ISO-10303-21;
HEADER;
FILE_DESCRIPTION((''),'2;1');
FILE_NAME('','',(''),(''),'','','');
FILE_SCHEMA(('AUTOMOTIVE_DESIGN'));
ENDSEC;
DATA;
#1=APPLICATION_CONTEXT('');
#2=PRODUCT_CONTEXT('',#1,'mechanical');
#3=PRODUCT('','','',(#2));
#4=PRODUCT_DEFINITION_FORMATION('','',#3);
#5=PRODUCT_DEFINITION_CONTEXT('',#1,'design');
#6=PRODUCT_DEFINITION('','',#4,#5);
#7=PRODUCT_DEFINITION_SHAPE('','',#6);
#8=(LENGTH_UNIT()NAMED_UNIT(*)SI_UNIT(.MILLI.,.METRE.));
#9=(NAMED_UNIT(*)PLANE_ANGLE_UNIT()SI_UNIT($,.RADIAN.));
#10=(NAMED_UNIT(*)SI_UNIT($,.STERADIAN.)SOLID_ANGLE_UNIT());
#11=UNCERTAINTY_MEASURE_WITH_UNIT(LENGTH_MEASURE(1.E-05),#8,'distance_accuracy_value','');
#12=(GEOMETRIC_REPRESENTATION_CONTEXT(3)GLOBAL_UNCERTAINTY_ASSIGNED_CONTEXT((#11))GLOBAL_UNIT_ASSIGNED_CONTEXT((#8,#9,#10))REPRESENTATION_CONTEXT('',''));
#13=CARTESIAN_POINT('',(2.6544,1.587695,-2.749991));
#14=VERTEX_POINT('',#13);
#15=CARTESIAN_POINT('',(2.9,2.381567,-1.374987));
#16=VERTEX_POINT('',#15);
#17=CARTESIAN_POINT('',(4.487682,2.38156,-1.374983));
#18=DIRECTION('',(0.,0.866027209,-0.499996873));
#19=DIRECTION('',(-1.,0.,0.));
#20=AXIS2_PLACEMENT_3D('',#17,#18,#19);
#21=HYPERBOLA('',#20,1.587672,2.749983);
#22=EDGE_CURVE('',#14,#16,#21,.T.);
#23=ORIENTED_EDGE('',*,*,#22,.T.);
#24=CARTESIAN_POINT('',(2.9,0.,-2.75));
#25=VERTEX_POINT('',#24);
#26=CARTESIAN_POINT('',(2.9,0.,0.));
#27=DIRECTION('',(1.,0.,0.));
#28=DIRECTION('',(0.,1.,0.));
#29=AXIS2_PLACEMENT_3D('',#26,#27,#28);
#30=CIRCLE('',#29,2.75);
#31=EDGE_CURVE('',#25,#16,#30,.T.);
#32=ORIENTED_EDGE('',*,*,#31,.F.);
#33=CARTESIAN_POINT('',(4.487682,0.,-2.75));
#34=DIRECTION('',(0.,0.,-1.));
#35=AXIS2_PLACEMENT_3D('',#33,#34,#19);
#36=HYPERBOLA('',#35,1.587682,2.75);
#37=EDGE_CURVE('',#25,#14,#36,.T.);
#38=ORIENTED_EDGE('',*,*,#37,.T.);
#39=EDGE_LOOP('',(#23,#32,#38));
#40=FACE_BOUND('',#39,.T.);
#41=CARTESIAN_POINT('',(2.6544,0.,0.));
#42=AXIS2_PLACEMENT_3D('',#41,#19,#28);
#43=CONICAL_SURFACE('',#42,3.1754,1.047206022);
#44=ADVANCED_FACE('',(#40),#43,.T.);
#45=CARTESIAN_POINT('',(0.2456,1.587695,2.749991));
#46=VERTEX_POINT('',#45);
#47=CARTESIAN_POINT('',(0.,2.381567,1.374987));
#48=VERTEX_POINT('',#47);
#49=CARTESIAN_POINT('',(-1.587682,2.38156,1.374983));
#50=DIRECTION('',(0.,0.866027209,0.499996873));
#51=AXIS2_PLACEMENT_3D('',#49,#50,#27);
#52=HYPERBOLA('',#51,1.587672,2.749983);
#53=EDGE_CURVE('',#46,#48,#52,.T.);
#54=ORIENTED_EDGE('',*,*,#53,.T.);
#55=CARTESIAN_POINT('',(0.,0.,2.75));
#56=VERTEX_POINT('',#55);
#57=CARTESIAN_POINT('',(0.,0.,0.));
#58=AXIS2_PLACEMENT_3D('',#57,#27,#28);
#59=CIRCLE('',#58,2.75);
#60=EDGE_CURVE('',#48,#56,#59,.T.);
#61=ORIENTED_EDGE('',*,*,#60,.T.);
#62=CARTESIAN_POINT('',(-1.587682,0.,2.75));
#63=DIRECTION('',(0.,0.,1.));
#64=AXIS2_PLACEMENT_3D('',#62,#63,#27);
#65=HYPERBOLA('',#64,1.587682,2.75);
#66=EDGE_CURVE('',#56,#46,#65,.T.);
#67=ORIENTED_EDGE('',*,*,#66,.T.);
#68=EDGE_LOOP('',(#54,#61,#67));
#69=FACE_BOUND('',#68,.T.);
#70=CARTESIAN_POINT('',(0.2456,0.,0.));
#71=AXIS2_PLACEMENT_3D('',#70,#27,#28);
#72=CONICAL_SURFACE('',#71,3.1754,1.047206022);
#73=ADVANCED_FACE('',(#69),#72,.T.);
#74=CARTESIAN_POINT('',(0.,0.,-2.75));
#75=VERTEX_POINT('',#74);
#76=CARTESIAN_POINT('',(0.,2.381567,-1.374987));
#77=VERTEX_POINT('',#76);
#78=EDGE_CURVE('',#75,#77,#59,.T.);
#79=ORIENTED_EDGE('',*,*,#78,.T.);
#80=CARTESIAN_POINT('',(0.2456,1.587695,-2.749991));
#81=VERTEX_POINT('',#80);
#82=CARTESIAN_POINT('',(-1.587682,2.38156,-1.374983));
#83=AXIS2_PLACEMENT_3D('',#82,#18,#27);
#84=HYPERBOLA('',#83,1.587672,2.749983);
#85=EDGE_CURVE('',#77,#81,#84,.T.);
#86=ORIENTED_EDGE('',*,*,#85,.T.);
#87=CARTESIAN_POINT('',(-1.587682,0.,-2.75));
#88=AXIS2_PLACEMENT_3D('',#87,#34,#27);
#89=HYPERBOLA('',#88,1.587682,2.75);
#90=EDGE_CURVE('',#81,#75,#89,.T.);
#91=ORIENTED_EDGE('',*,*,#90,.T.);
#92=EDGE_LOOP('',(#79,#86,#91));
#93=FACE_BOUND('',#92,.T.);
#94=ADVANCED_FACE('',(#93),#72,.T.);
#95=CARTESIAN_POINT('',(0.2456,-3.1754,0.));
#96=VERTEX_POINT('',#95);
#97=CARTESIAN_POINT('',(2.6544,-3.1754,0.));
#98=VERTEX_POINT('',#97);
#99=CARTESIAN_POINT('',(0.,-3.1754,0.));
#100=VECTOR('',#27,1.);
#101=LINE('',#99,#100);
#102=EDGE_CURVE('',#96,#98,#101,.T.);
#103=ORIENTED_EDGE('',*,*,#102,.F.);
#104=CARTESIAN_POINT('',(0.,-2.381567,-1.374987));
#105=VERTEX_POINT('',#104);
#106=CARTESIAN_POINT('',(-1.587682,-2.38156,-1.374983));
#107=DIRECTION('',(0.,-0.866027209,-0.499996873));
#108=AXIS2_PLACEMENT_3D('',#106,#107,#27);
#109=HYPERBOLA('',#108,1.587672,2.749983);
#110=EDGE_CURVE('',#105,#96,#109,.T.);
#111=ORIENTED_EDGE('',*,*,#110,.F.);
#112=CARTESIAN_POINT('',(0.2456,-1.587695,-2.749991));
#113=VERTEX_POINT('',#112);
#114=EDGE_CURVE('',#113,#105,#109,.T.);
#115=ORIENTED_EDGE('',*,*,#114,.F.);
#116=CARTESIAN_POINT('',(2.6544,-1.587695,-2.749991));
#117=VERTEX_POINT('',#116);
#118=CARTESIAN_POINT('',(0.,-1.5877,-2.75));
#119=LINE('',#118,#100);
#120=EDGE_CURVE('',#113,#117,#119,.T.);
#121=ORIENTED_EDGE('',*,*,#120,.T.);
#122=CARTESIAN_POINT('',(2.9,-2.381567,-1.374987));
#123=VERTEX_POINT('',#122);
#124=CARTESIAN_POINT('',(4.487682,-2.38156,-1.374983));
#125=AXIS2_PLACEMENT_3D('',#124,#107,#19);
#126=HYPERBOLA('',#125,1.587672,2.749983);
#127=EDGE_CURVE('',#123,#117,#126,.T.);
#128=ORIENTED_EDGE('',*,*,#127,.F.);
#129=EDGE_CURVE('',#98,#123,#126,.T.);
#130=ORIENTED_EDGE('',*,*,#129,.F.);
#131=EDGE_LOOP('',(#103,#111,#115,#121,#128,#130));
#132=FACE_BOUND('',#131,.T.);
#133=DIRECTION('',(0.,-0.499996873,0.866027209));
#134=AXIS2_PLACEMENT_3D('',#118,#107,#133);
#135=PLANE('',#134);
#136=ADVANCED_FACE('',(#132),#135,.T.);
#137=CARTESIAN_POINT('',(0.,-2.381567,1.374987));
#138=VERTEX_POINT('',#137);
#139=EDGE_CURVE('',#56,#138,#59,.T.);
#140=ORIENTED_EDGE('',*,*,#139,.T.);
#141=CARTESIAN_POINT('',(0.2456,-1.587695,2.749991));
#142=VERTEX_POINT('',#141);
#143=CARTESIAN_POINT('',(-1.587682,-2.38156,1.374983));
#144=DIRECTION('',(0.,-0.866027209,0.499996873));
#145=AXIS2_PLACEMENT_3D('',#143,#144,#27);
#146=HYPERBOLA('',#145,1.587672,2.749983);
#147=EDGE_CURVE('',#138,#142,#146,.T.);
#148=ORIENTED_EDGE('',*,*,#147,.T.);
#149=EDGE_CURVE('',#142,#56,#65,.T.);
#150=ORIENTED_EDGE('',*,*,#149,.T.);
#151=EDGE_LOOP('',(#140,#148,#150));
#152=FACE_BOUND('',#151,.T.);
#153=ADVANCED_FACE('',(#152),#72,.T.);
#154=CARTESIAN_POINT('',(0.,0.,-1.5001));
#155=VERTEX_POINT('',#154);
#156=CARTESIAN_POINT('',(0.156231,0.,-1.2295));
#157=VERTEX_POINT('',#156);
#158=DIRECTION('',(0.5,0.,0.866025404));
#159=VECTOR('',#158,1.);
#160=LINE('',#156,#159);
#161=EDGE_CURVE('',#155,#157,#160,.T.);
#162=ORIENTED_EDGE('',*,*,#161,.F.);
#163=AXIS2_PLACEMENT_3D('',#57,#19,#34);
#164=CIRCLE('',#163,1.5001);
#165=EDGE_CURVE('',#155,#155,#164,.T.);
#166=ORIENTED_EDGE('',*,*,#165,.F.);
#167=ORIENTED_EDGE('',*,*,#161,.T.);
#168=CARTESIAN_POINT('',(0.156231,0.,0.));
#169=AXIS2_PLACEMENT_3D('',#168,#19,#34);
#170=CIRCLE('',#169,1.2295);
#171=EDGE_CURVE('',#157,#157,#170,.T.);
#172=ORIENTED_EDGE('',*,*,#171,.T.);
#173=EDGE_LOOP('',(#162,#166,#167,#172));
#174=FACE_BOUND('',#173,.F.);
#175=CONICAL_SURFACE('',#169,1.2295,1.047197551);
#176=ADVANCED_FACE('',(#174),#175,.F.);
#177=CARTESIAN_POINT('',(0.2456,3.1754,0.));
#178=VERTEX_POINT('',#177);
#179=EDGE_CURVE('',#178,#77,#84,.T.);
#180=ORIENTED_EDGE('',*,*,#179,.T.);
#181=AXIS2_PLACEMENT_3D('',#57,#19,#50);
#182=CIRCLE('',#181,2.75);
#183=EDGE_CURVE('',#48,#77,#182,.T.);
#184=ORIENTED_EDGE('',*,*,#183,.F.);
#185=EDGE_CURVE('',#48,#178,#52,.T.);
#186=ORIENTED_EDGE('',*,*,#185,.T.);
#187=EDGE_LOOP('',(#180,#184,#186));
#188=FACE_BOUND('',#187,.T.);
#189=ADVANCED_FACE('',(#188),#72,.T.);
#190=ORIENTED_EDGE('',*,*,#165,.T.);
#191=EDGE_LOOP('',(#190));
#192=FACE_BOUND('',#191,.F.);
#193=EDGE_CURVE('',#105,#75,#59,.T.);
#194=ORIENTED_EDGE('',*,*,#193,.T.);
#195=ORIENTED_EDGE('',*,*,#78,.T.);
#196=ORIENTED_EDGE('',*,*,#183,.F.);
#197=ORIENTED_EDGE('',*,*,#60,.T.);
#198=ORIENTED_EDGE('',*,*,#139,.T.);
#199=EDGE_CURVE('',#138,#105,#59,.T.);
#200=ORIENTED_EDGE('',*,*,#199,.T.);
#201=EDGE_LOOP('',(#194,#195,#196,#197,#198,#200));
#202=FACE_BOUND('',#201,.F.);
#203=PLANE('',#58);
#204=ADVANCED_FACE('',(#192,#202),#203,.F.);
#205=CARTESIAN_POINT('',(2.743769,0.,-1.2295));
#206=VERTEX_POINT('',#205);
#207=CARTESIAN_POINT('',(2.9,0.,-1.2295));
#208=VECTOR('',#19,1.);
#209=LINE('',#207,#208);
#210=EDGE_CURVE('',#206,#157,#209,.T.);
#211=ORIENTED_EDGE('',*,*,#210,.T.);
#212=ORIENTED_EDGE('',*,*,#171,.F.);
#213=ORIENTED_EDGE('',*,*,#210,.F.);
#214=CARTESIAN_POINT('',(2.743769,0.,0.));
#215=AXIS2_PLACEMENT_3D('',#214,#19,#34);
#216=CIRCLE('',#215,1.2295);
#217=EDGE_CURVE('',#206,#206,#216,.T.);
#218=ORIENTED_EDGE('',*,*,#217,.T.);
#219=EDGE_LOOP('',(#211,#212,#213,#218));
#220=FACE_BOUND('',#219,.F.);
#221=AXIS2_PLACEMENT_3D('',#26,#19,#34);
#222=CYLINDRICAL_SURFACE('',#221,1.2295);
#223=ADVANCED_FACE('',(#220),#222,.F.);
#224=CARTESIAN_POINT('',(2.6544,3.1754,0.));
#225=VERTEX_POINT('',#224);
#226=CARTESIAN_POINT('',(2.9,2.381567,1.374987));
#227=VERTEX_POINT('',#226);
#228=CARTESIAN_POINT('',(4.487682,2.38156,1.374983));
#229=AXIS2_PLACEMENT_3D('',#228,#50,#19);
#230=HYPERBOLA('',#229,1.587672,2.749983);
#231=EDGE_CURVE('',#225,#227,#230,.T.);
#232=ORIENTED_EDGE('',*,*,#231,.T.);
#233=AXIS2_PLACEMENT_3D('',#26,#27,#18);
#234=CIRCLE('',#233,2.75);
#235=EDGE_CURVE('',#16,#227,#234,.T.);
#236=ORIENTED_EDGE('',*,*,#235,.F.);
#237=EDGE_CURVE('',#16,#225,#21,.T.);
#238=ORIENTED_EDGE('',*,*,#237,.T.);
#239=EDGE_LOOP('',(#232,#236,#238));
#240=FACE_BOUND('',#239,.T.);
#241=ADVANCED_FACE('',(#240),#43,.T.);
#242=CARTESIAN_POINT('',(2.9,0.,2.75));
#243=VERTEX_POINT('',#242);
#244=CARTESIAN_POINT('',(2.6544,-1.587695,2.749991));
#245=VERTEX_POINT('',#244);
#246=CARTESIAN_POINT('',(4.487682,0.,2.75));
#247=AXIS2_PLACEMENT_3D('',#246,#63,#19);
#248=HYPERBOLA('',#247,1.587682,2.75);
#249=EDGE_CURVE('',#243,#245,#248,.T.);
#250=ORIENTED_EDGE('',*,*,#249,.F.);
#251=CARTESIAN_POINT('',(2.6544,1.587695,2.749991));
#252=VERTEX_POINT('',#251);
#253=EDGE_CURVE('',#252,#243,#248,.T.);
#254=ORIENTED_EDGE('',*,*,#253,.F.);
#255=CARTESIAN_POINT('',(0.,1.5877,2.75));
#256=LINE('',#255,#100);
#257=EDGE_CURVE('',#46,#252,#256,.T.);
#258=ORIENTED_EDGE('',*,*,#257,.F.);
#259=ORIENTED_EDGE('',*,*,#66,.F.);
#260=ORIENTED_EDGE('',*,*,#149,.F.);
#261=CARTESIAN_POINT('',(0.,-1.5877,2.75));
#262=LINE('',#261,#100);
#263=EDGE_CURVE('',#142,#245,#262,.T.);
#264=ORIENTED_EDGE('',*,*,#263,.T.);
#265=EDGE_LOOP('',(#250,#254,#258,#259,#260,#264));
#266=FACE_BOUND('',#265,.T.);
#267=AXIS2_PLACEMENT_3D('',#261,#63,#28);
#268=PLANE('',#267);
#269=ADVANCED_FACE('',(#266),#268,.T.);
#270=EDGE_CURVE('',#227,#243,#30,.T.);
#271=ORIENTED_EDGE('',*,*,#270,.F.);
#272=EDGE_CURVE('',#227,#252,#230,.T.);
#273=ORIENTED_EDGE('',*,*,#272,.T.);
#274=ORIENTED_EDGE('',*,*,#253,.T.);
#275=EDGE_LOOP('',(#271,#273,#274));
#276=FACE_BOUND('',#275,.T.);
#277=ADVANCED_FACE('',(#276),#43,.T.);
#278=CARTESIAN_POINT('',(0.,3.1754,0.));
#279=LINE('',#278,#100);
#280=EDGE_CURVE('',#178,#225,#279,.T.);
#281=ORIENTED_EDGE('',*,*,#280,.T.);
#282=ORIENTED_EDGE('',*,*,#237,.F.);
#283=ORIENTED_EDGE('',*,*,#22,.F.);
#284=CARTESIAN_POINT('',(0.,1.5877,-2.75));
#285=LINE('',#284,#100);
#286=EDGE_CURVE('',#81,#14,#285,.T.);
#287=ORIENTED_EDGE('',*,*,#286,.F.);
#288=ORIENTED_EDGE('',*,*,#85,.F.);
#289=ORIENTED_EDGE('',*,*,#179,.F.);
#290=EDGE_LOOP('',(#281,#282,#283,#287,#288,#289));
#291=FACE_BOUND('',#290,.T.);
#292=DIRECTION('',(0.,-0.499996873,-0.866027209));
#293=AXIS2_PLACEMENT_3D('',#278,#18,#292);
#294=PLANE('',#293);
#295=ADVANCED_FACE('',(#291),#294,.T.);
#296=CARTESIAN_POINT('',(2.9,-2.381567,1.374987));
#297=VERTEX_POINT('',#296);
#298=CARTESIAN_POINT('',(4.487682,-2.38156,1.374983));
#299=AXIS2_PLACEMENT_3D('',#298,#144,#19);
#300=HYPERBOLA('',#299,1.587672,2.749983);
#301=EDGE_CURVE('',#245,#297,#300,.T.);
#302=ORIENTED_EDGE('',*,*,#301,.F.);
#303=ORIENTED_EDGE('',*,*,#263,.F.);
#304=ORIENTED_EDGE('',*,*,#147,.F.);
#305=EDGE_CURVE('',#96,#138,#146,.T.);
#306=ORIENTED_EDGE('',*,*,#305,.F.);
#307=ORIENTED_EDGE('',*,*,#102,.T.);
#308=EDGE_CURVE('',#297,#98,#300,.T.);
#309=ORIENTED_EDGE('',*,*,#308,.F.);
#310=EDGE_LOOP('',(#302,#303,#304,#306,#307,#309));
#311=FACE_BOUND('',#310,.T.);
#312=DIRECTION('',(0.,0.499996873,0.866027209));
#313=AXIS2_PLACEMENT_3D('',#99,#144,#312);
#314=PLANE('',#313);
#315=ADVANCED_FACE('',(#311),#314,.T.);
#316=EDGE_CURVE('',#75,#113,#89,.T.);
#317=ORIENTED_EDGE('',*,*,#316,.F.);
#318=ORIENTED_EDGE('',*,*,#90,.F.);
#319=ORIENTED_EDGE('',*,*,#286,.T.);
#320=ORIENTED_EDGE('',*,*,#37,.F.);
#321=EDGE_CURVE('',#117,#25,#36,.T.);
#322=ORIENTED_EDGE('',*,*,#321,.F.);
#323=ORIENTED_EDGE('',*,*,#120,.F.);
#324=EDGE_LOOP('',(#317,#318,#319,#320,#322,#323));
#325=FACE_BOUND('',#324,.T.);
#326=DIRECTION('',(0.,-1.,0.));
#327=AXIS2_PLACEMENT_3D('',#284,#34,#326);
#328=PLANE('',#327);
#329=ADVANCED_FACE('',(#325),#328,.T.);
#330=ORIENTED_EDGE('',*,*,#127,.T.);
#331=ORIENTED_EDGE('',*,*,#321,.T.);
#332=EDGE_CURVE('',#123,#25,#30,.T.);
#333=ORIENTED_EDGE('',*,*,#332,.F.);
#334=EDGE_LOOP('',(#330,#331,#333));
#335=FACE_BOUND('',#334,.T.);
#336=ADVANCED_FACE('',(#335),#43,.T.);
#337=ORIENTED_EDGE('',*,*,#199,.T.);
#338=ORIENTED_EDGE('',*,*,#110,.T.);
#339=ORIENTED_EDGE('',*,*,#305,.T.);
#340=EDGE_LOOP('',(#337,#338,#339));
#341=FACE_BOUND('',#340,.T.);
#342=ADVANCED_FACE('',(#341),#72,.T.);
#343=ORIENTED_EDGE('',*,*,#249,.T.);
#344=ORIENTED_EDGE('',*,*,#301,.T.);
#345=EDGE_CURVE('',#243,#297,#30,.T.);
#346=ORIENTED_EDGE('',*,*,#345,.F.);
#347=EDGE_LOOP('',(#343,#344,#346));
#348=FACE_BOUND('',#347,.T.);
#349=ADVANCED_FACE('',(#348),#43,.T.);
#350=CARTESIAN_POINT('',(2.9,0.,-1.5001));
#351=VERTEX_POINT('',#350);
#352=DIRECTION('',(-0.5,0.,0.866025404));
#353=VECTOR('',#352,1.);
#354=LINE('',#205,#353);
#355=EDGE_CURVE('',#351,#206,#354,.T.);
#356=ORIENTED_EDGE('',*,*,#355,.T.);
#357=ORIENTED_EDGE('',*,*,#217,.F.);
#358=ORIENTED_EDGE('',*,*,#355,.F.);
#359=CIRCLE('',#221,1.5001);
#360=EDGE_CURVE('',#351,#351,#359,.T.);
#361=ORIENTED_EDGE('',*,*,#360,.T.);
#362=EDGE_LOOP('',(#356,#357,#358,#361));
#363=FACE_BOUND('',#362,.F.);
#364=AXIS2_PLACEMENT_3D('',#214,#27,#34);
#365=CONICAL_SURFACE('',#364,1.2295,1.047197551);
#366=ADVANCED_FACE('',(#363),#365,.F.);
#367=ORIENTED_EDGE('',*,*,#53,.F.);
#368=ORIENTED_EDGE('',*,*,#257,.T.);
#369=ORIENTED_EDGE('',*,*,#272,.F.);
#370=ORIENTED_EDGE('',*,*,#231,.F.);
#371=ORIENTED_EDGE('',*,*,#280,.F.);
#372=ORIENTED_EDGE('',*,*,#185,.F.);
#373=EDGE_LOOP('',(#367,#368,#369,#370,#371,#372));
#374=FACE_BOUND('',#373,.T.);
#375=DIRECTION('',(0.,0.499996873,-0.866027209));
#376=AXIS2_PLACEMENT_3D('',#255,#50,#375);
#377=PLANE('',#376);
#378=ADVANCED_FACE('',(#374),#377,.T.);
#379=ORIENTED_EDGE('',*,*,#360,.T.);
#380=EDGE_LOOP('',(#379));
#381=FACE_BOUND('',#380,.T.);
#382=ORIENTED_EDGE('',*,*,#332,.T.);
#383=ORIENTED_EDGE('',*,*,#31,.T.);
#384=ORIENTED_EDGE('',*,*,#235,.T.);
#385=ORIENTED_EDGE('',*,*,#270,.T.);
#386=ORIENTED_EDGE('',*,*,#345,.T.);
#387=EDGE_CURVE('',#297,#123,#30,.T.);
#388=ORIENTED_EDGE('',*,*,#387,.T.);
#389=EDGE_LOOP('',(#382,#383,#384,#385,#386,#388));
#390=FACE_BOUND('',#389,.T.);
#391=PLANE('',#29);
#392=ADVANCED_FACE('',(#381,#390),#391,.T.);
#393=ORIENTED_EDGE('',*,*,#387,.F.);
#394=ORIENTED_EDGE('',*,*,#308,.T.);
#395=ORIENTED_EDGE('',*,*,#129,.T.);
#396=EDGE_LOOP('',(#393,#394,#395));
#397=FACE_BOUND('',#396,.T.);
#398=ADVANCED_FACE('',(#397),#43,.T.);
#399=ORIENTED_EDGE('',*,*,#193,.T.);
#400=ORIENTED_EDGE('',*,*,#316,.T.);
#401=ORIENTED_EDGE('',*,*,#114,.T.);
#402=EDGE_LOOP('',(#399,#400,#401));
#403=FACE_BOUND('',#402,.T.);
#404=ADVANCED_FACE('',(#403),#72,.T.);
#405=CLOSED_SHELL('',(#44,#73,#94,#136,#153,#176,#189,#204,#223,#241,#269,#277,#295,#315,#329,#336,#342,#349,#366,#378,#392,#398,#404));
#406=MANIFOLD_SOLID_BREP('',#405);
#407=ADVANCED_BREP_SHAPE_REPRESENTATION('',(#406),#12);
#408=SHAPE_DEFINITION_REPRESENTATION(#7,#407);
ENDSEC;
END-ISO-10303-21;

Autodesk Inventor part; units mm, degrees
ref_plane "YZ Plane" through (0, 0, 0) normal (1, 0, 0) x (0, 1, 0)
ref_plane "XZ Plane" through (0, 0, 0) normal (0, 1, 0) x (-1, 0, 0)
sketch "Sketch1" plane through (0, 0, 0) normal (1, 0, 0) x (0, 1, 0)
  line L0 (-3.1754, 0) -> (-1.5877, 2.75)
  line L1 (-1.5877, 2.75) -> (1.5877, 2.75)
  line L2 (1.5877, 2.75) -> (3.1754, 0)
  line L3 (3.1754, 0) -> (1.5877, -2.75)
  line L4 (1.5877, -2.75) -> (-1.5877, -2.75)
  line L5 (-1.5877, -2.75) -> (-3.1754, 0)
  point P0 (0, 0)
  point P1 (0, 0)
  dimension "d0" = 6.3509
extrude "Body" add sketch "Sketch1" along normal blind 2.9
sketch "Sketch2" plane through (0, 0, 0) normal (0, 0, 1) x (1, 0, 0)
  line L0 (0, 1.5877) -> (0, 3.1754) projected
  line L1 (0, 3.1754) -> (2.9, 3.1754) projected
  line L2 (2.9, 1.5877) -> (2.9, 3.1754) projected
  line L3 (-0.58, 0) -> (3.48, 0) projected
  line L4 (0.2456, 3.1754) -> (0, 2.75)
  line L5 (2.6544, 3.1754) -> (2.9, 2.75)
  dimension "d3" = 30
  dimension "d4" = 30
  dimension "d5" = 5.5
  dimension "d6" = 5.5
revolve "Chamfer1" cut sketch "Sketch2" angle 360 about axis through (-10, 0, 0) along (1, 0, 0)
sketch "Sketch3" plane through (2.9, 0, 0) normal (1, 0, 0) x (0, 0, -1)
  arc A0 (-1.375, -2.3816) -> (1.375, -2.3816) centre (0, 0) ccw projected
hole "Thread" at (2.9, 0, 0) direction (-1, 0, 0) diameter 2.459 end through all thread size "M3x0.5" class "6H" standard "ANSI Metric M Profile"
chamfer "Chamfer2" distance 0.2706 angle 30 1 edges at (2.9, 0, 1.2295) measured on face at (2.9, -2.2301, -0.0494)
chamfer "Chamfer3" distance 0.2706 angle 30 1 edges at (0, 0, 1.2295) measured on face at (0, -2.2301, -0.0494)
ref_plane "Work Plane1" through (-5.9878, 0, 0) normal (0, -0.8660254, -0.5) x (1, 0, 0)
equation "\"d0\" = 1.1547 * SW"
equation "\"d1\" = KOH"
equation "\"d3\" = ANG1"
equation "\"d4\" = ANG2"
equation "\"d5\" = SW0"
equation "\"d6\" = SW01"
equation "\"d8\" = -0.5 * GD1 + 0.5 * NND"
equation "\"d40\" = -0.5 * GD1 + 0.5 * NND"
equation "\"d10\" = -0.5 * GD1 + 0.5 * NND"
equation "\"d41\" = -0.5 * GD1 + 0.5 * NND"
equation "\"ANG1\" = 30deg"
equation "\"ANG2\" = 30deg"
equation "\"NND\" = 3"
equation "\"KOH\" = 2.9"
equation "\"SW\" = 5.5"
equation "\"SW0\" = SW"
equation "\"SW01\" = SW"
equation "\"GUL\" = 0.541266 * PTC"
equation "\"THREADDIA\" = 3"
equation "\"TOA\" = 30deg"
equation "\"PTC\" = 0.5"
equation "\"E0\" = 1.155 * SW"
equation "\"GAL\" = 0.541266 * PTC"
equation "\"SD2\" = 0"
equation "\"WFT\" = 0"
equation "\"GD1\" = 2.458734"
properties part number "ANSI B18.2.4.2M - M3 x 0.5" material "Steel, Mild"
